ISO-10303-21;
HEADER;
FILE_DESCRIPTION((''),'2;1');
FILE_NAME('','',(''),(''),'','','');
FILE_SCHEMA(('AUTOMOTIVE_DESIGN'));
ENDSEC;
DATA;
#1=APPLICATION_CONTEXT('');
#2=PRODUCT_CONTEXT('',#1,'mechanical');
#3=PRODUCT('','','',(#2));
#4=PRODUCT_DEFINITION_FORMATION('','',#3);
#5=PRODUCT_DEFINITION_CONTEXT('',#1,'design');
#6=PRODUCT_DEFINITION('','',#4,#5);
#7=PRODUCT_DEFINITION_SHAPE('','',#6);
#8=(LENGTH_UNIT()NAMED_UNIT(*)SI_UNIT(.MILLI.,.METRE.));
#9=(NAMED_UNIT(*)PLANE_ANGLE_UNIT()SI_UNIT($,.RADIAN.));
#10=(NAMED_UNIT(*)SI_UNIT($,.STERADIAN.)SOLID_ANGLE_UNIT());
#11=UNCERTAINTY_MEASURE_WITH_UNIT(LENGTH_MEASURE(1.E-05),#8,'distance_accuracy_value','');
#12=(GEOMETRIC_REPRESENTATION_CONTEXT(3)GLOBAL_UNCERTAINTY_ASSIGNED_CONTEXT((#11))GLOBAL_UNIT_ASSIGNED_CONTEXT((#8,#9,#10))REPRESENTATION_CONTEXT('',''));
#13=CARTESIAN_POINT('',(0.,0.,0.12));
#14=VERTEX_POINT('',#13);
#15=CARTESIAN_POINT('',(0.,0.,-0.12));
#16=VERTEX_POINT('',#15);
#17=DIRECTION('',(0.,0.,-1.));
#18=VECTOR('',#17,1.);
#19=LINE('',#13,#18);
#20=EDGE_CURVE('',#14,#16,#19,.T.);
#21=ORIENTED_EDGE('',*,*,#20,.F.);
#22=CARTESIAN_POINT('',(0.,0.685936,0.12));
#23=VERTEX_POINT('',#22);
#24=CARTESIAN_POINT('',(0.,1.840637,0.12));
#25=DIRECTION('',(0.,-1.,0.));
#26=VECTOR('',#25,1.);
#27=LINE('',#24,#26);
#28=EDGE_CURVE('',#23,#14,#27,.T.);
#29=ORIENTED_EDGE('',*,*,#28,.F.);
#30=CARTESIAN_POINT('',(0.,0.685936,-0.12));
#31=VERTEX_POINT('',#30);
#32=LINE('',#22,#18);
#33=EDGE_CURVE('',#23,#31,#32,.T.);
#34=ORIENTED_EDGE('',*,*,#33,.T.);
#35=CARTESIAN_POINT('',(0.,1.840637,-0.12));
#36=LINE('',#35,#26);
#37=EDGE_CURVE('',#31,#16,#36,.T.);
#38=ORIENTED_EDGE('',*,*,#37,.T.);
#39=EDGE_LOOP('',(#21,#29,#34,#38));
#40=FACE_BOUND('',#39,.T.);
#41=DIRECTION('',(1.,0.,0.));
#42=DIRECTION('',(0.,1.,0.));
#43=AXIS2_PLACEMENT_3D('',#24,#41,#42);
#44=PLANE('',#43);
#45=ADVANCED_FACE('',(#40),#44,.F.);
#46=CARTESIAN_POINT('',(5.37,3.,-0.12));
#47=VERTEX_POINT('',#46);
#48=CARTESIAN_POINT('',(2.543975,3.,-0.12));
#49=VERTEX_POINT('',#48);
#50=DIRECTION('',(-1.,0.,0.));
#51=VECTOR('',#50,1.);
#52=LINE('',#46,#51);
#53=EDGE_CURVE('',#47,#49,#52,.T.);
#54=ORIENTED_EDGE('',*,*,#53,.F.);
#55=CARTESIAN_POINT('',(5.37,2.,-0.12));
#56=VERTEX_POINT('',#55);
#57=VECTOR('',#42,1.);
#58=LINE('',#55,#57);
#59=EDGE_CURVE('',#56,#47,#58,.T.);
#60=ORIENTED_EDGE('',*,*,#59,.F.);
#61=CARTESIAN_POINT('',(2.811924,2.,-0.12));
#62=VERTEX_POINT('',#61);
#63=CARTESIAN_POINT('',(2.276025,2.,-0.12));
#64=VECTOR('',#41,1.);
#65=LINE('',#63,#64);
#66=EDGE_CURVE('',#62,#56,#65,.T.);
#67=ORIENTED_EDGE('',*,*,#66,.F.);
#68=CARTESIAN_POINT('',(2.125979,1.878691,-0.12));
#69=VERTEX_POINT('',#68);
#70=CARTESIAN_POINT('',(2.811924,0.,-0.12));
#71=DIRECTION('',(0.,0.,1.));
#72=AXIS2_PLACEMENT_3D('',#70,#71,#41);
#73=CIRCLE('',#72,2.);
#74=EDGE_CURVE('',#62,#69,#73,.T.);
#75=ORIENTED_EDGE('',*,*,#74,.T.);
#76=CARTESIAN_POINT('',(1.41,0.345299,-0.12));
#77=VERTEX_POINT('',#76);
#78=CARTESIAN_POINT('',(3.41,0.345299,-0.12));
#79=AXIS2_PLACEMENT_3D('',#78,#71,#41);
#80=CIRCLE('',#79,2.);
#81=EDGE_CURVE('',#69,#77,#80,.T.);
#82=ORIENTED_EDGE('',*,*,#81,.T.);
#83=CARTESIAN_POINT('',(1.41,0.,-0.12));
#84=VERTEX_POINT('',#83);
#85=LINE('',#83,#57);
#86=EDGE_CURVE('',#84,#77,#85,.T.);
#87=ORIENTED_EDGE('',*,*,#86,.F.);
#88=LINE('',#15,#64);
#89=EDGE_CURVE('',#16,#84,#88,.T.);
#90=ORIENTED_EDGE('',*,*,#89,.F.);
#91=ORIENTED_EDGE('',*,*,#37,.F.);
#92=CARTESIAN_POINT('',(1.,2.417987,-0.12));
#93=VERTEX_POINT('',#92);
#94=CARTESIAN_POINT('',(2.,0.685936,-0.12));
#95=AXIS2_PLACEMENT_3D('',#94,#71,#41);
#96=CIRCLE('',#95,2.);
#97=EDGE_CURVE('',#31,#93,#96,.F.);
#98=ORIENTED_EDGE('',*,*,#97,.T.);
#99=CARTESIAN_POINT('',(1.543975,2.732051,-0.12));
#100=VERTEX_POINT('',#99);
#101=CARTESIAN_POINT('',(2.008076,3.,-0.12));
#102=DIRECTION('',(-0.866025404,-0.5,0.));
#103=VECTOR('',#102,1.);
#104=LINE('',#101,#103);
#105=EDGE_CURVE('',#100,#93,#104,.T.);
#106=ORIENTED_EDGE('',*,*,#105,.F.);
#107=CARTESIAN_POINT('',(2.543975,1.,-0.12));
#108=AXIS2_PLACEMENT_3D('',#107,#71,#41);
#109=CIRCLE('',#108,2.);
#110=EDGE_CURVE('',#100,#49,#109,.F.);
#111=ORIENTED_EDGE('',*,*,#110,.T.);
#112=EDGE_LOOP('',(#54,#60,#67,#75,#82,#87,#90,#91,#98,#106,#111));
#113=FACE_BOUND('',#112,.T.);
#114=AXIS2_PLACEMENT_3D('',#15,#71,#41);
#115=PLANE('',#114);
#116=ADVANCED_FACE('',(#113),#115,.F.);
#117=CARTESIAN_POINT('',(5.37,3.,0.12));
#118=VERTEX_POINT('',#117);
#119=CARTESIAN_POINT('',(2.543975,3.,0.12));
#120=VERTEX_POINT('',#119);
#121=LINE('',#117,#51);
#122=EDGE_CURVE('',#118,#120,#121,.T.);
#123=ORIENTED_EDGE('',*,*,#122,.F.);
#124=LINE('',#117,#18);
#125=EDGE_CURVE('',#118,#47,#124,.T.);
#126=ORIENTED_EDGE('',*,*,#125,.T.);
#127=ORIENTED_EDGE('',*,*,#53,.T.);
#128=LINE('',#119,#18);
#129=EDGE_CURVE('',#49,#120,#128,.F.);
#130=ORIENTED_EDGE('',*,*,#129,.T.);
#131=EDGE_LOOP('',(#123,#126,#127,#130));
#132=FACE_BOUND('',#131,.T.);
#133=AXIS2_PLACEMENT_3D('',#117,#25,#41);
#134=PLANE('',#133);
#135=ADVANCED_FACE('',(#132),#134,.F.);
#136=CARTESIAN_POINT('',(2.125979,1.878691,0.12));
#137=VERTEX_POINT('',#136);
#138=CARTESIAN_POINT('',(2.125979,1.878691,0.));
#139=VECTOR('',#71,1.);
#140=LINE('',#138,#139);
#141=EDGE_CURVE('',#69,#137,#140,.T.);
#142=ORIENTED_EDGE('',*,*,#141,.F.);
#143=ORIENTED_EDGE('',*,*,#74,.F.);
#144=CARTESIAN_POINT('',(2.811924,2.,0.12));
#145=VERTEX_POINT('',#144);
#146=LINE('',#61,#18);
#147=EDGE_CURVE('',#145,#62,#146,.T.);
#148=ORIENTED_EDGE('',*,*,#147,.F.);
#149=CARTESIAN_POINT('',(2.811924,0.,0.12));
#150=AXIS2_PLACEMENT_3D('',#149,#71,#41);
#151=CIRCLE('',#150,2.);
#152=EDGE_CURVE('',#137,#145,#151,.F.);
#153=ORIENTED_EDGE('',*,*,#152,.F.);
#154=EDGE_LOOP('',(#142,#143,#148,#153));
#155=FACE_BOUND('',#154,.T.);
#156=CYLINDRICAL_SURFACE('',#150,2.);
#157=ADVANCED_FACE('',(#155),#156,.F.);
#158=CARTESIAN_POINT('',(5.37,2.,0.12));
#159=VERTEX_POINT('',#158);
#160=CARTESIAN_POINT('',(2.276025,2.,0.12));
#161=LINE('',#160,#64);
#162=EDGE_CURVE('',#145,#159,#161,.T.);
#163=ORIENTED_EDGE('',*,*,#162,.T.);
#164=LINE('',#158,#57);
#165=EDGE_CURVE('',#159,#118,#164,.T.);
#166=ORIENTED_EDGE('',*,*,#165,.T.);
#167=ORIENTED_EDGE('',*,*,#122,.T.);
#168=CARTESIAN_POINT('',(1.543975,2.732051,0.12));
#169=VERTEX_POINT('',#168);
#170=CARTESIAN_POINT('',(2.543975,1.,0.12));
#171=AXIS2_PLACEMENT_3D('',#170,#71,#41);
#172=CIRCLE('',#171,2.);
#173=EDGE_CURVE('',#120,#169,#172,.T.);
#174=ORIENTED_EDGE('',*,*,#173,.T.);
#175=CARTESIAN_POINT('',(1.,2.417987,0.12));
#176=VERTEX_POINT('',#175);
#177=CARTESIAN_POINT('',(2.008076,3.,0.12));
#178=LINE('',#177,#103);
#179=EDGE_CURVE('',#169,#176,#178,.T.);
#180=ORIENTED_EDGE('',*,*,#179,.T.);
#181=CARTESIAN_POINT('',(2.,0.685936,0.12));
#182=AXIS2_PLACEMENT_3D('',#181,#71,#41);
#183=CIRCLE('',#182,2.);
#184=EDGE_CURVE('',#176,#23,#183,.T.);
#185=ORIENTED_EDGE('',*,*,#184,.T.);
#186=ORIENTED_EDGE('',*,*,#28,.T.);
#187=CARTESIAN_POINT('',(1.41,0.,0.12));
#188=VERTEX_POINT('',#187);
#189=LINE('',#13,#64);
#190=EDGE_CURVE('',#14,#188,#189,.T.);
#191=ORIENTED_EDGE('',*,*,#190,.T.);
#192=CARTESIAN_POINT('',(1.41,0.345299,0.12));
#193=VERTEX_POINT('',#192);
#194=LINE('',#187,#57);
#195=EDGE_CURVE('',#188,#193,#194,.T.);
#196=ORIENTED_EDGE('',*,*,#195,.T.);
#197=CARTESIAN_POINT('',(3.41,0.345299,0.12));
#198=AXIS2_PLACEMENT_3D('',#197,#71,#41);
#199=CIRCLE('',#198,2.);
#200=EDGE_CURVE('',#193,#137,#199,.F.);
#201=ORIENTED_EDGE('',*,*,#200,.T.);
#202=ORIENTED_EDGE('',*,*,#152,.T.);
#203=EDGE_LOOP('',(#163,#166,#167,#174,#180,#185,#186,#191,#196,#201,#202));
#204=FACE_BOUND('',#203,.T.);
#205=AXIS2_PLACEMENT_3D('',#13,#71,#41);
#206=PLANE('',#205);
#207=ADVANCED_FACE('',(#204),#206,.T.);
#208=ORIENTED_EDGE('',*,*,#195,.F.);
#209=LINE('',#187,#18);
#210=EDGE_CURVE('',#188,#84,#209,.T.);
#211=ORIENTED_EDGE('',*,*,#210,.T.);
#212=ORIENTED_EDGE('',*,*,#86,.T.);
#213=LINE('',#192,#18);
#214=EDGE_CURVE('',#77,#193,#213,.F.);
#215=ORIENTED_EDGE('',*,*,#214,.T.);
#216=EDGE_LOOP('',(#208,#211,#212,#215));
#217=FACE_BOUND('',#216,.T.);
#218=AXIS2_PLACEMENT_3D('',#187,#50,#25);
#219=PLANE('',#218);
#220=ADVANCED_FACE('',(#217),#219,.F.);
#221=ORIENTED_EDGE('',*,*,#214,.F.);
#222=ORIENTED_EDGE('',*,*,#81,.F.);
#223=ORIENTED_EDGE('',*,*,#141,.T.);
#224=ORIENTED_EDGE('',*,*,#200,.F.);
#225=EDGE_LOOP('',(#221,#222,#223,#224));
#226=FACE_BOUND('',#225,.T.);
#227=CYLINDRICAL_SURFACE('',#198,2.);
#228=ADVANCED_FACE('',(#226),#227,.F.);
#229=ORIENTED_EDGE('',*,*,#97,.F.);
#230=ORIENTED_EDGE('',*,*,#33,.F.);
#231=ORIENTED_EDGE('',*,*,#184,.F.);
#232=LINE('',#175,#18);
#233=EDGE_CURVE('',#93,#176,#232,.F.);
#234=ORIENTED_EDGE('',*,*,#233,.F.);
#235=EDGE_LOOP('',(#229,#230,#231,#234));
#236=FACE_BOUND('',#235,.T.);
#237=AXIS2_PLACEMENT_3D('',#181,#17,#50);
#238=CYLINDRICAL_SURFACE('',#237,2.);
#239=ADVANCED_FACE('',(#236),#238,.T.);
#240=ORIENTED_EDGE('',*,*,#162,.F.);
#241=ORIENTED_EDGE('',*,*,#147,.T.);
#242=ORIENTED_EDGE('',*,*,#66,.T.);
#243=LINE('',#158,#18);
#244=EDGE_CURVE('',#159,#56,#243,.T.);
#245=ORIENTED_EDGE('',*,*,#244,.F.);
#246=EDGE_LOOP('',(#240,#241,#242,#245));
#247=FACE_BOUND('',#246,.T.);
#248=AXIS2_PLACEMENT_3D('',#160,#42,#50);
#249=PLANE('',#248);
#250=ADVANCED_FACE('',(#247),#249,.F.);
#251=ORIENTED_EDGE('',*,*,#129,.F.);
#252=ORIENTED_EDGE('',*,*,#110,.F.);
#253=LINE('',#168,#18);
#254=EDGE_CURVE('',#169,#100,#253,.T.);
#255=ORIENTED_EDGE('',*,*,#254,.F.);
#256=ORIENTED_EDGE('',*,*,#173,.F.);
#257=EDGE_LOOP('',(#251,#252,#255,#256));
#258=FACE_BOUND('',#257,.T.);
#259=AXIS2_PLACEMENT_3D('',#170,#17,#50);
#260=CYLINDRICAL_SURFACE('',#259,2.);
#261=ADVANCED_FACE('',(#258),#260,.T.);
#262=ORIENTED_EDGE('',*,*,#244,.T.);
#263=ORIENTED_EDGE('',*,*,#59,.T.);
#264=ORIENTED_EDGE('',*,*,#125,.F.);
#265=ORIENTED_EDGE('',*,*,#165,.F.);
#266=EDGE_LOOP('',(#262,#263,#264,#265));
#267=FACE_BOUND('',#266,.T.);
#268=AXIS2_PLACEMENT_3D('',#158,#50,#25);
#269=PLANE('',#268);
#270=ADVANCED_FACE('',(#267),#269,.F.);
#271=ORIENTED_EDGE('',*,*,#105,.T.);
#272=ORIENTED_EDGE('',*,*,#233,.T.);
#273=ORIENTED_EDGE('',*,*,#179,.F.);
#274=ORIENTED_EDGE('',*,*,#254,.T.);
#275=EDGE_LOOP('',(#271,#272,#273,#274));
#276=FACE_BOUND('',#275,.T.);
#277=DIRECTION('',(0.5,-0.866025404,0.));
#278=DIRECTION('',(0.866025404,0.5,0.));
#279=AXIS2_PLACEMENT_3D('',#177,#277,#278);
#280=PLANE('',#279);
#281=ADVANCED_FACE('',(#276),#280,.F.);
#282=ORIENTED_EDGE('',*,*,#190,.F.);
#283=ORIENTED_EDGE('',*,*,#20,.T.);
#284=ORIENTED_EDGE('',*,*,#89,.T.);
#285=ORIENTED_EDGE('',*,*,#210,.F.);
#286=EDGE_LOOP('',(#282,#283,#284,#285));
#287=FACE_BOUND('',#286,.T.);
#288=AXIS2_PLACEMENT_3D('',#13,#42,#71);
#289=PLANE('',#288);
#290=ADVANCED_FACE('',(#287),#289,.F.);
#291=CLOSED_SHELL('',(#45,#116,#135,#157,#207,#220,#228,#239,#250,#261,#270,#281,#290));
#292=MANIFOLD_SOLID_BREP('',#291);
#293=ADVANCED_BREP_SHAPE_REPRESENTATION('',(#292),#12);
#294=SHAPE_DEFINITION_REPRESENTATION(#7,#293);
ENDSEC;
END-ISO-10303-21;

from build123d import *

# Parameters (mm, degrees)
BOSS_EXTRUDE1_DEPTH = 0.12
FILLET1_R           = 2


with BuildPart() as part:
    # Sketch1 → Boss-Extrude1 (new, symmetric)
    with BuildSketch(Plane.XY):
        Polygon((0, 0), (1.41, 0), (1.41, 1.5), (2.276025404, 2), (5.37, 2), (5.37, 3), (2.008076211, 3), (0, 1.840636659), align=None)
    extrude(amount=BOSS_EXTRUDE1_DEPTH, both=True)

    # Fillet1
    # the kernel refuses this fillet: 2 mm, written as the material it adds along each edge
    with BuildSketch(Plane(origin=(1.41, 1.5, -0.12), x_dir=(0.8660254037844385, 0.5000000000000003, 0), z_dir=(0, 0, 1))) as fillet1_piece_1:
        with BuildLine():
            CenterArc((FILLET1_R * 0.57735026919, -FILLET1_R), FILLET1_R, 90, 60)
            Line((-FILLET1_R * 0.288675134595, -FILLET1_R * 0.5), (0, 0))
            Line((0, 0), (FILLET1_R * 0.57735026919, 0))
        make_face()
    extrude(amount=0.24)
    with BuildSketch(Plane(origin=(2.276025404, 2, -0.12), x_dir=(1, 0, 0), z_dir=(0, 0, 1))) as fillet1_piece_2:
        with BuildLine():
            CenterArc((FILLET1_R * 0.267949192431, -FILLET1_R), FILLET1_R, 90, 30)
            Line((-FILLET1_R * 0.232050807569, -FILLET1_R * 0.133974596216), (0, 0))
            Line((0, 0), (FILLET1_R * 0.267949192431, 0))
        make_face()
    extrude(amount=0.24)
    # the kernel refuses this fillet: 2 mm, written as the material it takes off along each edge
    with BuildSketch(Plane(origin=(2.008076211, 3, 1.459745962), x_dir=(-0.8660254037844389, -0.4999999999999996, 0), z_dir=(0, 0, -1))) as fillet1_2_piece_1:
        with BuildLine():
            CenterArc((FILLET1_R * 0.267949192431, -FILLET1_R), FILLET1_R, 90, 30)
            Line((-FILLET1_R * 0.232050807569, -FILLET1_R * 0.133974596216), (0, 0))
            Line((0, 0), (FILLET1_R * 0.267949192431, 0))
        make_face()
    extrude(amount=2.919491924, mode=Mode.SUBTRACT)
    with BuildSketch(Plane(origin=(0, 1.840636659, 3.006751346), x_dir=(0, -1, 0), z_dir=(0, 0, -1))) as fillet1_2_piece_2:
        with BuildLine():
            CenterArc((FILLET1_R * 0.57735026919, -FILLET1_R), FILLET1_R, 90, 60)
            Line((-FILLET1_R * 0.288675134595, -FILLET1_R * 0.5), (0, 0))
            Line((0, 0), (FILLET1_R * 0.57735026919, 0))
        make_face()
    extrude(amount=6.013502692, mode=Mode.SUBTRACT)


solid = part.part
